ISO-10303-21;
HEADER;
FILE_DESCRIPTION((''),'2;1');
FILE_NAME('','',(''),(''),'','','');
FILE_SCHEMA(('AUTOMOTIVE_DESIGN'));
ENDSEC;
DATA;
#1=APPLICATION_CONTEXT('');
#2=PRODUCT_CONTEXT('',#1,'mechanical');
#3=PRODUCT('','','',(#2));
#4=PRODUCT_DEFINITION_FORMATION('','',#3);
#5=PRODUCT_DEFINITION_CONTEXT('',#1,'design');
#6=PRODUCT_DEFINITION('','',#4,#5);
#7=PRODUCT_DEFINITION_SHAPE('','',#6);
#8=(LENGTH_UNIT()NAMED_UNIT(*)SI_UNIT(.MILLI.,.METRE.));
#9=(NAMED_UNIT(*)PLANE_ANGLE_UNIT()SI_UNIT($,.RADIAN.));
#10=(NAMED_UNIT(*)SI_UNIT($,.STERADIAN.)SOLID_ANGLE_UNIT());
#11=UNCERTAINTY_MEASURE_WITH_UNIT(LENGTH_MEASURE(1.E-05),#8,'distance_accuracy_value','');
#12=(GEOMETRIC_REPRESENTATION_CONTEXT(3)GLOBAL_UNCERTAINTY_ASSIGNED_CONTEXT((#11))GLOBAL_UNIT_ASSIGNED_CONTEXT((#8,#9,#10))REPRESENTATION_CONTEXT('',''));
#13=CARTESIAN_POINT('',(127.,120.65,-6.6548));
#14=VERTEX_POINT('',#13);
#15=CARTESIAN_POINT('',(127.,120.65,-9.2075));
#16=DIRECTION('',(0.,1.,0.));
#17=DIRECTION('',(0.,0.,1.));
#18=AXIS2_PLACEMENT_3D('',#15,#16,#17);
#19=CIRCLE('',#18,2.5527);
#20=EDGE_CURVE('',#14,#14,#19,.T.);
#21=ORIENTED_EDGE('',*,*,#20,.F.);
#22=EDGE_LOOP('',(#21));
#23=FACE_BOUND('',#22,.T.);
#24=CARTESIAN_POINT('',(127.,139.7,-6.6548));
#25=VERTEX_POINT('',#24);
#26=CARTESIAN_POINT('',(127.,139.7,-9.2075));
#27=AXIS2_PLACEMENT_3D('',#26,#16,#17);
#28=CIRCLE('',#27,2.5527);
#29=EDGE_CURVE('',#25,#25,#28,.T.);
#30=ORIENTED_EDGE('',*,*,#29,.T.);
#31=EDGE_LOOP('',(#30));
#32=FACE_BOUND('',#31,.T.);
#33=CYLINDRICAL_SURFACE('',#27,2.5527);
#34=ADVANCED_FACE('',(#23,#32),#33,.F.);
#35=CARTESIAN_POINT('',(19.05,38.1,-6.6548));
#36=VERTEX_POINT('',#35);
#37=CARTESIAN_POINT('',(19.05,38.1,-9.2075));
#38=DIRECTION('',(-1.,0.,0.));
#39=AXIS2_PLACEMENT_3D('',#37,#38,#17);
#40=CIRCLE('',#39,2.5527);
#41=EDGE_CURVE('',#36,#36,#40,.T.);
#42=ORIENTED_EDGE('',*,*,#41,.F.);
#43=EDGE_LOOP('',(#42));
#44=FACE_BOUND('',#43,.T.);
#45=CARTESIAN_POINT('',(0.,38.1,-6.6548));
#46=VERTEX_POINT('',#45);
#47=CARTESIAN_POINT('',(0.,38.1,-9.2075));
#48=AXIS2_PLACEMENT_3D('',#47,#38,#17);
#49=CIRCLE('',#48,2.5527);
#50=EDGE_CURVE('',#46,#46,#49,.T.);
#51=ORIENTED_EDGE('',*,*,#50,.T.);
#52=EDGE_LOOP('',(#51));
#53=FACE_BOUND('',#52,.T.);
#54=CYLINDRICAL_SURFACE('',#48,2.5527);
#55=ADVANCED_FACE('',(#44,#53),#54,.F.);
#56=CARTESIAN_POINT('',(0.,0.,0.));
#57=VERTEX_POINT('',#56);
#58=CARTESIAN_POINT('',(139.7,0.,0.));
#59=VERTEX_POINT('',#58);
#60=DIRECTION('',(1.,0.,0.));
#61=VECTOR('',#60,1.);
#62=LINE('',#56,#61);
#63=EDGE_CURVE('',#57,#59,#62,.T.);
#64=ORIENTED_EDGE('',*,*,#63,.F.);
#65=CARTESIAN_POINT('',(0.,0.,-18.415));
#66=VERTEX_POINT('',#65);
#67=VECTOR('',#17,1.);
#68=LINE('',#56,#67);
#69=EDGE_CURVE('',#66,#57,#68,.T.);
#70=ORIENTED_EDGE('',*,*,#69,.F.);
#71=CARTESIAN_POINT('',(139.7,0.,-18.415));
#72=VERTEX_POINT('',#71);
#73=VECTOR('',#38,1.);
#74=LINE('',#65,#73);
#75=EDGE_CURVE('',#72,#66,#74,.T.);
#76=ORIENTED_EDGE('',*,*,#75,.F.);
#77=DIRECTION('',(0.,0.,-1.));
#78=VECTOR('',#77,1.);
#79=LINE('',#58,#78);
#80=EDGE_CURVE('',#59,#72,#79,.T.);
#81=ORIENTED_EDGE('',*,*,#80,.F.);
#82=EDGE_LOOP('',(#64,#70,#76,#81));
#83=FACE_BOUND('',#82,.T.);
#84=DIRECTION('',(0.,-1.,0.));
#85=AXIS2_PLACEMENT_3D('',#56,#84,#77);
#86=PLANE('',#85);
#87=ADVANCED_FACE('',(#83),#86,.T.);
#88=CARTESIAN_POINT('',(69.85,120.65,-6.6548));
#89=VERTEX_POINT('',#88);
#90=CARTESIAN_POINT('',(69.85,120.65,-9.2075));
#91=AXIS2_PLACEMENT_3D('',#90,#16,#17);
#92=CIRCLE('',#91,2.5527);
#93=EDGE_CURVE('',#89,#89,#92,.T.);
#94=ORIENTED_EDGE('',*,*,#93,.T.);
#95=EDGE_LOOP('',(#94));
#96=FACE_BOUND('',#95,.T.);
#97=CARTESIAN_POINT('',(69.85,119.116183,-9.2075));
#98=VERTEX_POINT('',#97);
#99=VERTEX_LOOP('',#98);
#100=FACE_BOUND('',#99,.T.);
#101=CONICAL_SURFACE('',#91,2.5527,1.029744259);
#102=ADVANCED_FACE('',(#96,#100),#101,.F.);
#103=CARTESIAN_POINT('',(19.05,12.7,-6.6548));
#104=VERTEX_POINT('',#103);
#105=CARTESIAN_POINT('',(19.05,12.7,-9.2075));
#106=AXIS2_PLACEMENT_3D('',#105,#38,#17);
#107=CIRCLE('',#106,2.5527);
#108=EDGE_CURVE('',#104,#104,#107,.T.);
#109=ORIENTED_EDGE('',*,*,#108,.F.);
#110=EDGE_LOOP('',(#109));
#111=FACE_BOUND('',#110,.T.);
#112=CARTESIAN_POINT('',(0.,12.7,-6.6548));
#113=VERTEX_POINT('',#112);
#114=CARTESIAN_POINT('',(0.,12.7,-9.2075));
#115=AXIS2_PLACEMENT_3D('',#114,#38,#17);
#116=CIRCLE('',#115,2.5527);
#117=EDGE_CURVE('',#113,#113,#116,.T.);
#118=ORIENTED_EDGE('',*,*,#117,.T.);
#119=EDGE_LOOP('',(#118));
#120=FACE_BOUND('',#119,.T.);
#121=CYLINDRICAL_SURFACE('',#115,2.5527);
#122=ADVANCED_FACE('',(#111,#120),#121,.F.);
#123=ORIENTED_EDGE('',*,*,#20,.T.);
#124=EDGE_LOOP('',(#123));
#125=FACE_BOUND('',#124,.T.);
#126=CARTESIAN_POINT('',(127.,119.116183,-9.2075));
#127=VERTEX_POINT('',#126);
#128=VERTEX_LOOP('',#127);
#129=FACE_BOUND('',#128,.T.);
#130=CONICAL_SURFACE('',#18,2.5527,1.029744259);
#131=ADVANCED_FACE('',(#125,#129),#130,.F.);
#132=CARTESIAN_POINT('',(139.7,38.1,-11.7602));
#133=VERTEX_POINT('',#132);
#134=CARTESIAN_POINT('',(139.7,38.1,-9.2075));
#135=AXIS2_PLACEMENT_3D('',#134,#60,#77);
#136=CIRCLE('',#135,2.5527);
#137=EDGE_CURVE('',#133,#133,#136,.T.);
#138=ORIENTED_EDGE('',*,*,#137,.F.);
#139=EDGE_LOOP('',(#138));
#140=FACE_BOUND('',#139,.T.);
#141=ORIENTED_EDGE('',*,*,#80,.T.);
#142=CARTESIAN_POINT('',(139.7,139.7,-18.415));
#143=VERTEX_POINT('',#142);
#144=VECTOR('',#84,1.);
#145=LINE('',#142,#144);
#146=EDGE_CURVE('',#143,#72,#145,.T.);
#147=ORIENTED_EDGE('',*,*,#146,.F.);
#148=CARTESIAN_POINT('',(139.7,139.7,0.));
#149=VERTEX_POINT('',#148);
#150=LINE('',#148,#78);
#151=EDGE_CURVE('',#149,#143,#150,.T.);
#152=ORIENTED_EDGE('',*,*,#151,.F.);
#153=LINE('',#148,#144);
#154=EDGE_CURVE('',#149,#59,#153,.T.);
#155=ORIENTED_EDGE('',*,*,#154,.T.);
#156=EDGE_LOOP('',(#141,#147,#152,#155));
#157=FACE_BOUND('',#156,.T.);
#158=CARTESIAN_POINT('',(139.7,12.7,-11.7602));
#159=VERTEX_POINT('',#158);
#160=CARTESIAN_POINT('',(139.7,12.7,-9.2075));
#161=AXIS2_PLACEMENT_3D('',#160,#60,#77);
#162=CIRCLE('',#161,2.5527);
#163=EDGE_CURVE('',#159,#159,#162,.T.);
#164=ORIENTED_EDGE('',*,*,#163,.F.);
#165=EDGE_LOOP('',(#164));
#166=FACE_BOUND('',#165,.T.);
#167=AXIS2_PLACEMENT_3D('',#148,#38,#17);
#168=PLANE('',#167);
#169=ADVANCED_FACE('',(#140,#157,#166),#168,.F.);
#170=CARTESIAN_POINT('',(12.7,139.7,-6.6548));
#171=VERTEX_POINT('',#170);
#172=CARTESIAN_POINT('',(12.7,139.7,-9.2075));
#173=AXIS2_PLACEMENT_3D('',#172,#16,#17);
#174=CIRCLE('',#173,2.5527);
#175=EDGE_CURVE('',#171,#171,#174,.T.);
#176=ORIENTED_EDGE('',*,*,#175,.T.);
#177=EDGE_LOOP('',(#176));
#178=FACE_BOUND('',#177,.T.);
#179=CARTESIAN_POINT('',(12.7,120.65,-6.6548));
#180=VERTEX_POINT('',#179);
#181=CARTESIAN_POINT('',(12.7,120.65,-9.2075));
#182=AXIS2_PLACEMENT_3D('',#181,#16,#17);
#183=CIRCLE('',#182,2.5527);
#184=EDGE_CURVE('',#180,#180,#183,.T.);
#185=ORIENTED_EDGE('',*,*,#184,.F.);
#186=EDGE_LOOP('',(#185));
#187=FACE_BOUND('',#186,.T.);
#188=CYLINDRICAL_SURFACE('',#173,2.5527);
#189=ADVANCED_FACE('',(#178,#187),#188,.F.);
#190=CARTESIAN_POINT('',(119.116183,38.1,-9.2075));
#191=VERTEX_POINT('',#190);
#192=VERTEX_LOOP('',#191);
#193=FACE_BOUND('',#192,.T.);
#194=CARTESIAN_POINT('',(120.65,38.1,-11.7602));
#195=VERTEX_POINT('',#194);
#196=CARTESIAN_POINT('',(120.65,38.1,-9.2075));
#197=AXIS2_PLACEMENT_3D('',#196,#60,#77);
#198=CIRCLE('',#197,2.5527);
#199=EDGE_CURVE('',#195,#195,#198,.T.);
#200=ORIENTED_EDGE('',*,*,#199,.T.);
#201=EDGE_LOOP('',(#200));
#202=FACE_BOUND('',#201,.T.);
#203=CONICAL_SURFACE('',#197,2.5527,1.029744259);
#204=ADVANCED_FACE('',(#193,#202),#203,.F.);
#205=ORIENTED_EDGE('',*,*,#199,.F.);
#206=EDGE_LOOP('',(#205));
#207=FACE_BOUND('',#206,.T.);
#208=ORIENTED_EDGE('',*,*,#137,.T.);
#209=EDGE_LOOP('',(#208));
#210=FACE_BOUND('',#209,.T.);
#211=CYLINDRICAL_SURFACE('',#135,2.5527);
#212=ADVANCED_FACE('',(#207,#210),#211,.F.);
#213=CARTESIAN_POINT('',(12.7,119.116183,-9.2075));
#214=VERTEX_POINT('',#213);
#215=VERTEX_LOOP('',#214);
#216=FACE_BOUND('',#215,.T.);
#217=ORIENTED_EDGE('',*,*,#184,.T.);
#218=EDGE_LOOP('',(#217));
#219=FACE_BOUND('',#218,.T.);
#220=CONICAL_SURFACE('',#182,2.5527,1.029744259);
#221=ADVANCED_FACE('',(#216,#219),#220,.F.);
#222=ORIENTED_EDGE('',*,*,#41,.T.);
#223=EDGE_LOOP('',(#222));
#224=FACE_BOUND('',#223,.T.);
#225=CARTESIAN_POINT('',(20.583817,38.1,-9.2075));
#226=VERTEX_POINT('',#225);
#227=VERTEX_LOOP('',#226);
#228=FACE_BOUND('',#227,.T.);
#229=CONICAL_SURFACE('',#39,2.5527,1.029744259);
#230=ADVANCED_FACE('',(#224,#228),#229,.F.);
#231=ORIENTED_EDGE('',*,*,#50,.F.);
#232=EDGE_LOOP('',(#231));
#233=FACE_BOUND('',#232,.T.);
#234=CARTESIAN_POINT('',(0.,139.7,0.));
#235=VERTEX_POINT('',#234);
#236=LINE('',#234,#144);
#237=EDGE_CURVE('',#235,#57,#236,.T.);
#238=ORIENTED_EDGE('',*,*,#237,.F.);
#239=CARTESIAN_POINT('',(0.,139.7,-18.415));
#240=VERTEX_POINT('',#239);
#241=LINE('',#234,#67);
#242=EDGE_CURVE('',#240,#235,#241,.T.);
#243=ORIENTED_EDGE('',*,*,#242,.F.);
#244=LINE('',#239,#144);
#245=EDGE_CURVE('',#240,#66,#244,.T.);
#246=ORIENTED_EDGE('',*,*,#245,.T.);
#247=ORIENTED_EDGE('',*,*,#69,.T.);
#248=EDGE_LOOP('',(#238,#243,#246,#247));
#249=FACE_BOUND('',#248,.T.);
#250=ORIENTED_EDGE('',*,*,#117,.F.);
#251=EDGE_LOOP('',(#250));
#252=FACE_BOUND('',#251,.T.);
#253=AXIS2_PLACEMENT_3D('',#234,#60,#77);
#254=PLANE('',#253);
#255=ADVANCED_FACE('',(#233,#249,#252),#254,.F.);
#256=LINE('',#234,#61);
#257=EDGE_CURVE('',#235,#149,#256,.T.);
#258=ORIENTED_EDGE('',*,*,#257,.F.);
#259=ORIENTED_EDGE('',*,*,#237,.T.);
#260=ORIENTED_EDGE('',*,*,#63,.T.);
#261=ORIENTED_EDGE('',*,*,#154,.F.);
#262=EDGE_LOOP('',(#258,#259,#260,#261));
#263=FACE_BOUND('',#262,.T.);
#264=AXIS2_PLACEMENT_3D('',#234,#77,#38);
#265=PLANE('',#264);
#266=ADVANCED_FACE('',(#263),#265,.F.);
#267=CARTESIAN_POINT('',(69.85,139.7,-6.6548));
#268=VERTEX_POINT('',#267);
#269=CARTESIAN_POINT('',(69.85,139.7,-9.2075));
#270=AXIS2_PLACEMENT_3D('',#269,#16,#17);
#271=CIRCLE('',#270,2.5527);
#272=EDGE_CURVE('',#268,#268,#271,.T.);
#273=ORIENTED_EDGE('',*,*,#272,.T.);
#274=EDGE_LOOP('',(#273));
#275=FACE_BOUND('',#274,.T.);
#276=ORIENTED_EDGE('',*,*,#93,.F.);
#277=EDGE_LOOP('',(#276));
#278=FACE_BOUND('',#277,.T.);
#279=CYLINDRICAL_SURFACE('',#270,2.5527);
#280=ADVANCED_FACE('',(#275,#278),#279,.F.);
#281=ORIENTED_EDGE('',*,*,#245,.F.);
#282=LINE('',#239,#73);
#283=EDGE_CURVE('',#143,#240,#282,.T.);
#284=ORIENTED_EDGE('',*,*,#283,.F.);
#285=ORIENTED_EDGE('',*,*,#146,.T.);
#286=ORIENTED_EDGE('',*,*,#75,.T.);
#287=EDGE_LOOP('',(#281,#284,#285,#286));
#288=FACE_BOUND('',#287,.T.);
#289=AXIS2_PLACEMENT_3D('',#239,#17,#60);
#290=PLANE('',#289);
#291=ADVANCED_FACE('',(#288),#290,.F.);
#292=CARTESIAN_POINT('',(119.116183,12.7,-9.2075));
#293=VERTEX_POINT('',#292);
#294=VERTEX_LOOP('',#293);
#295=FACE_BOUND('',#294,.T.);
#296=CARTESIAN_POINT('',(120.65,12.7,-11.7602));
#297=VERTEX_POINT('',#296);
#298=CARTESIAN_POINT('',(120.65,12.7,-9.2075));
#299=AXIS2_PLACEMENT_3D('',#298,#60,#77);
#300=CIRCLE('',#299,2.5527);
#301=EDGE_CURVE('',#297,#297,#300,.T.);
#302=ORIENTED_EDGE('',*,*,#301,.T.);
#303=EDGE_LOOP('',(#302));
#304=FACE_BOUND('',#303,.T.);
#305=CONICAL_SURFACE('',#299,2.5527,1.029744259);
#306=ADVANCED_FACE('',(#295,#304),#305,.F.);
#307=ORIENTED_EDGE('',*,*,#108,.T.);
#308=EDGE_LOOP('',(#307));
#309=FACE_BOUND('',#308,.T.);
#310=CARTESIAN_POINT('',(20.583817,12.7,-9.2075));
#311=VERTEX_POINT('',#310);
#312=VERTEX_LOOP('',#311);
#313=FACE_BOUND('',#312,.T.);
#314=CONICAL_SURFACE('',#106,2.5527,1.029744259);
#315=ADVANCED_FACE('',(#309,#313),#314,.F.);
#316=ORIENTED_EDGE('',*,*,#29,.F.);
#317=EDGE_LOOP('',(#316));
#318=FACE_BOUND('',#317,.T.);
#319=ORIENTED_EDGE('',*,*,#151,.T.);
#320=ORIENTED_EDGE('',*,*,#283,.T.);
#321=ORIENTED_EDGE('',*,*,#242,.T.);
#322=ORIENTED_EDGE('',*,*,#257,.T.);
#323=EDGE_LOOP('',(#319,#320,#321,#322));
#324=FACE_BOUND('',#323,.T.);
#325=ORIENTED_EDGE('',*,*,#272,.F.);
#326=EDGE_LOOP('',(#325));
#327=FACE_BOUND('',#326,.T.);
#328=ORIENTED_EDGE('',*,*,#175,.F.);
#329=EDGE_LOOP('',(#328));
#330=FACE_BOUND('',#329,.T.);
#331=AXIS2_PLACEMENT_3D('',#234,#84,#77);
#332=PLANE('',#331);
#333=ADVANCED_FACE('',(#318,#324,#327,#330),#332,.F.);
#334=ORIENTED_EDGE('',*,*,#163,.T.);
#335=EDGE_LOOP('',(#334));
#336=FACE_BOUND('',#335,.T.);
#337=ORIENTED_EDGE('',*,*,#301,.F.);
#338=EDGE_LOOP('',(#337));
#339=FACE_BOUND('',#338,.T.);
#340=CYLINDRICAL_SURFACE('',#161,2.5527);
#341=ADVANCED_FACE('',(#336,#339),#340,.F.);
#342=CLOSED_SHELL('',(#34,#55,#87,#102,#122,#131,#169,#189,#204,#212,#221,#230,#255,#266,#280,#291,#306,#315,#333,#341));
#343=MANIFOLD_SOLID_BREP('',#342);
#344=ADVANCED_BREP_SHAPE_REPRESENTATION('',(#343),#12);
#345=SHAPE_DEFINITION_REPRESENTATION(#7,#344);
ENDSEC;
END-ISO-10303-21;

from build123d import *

# Parameters (mm, degrees)
SKETCH1_W           = 139.7
SKETCH1_H           = 18.415
BOSS_EXTRUDE1_DEPTH = 139.7


# Read off the part's stored shape, not the designer's step: Mirror2
with BuildPart() as part:
    # Sketch1 → Boss-Extrude1 (new body)
    with BuildSketch(Plane(origin=(0, 0, 0), x_dir=(1, 0, 0), z_dir=(0, 1, 0))):
        with Locations((69.85, 9.2075)):
            Rectangle(SKETCH1_W, SKETCH1_H)
    extrude(amount=BOSS_EXTRUDE1_DEPTH)

    # Sketch4 → 1/4-20 Tapped Hole1 (revolve, cut)
    with BuildSketch(Plane(origin=(139.7, 38.1, -9.2075), x_dir=(0, 0, -1), z_dir=(0, 1, 0))):
        Polygon((0, 0), (0, 20.583816902), (2.5527, 19.05), (2.5527, 0), align=None)
    revolve(axis=Axis((146.05, 38.1, -9.2075), (-1, 0, 0)), mode=Mode.SUBTRACT)

    # Sketch4 at point 2 (carried to point 2, square into its face) → 1/4-20 Tapped Hole1 at 2 (revolve, cut)
    with BuildSketch(Plane(origin=(139.7, 12.7, -9.2075), x_dir=(0, 0, -1), z_dir=(0, 1, 0))):
        Polygon((0, 0), (0, 20.583816902), (2.5527, 19.05), (2.5527, 0), align=None)
    revolve(axis=Axis((146.05, 12.7, -9.2075), (-1, 0, 0)), mode=Mode.SUBTRACT)

    # Sketch4 at point 3 (carried to point 3, square into its face) → 1/4-20 Tapped Hole1 at 3 (revolve, cut)
    with BuildSketch(Plane(origin=(69.85, 139.7, -9.2075), x_dir=(0, 0, -1), z_dir=(-1, 0, 0))):
        Polygon((0, 0), (0, 20.583816902), (2.5527, 19.05), (2.5527, 0), align=None)
    revolve(axis=Axis((69.85, 146.05, -9.2075), (0, -1, 0)), mode=Mode.SUBTRACT)

    # Sketch4 at point 4 (carried to point 4, square into its face) → 1/4-20 Tapped Hole1 at 4 (revolve, cut)
    with BuildSketch(Plane(origin=(12.7, 139.7, -9.2075), x_dir=(0, 0, -1), z_dir=(-1, 0, 0))):
        Polygon((0, 0), (0, 20.583816902), (2.5527, 19.05), (2.5527, 0), align=None)
    revolve(axis=Axis((12.7, 146.05, -9.2075), (0, -1, 0)), mode=Mode.SUBTRACT)

    # Mirror2 outline → Mirror2 (revolve, cut)
    with BuildSketch(Plane(origin=(0, 12.7, -9.2075), x_dir=(0, 1, 0), z_dir=(0, 0, -1))):
        Polygon((2.5527, 0), (2.5527, 19.05), (0, 20.583816902), (0, 0), align=None)
    revolve(axis=Axis((0, 12.7, -9.2075), (1, 0, 0)), mode=Mode.SUBTRACT)

    # Mirror2 2 outline → Mirror2 2 (revolve, cut)
    with BuildSketch(Plane(origin=(0, 38.1, -9.2075), x_dir=(0, 1, 0), z_dir=(0, 0, -1))):
        Polygon((2.5527, 0), (2.5527, 19.05), (0, 20.583816902), (0, 0), align=None)
    revolve(axis=Axis((0, 38.1, -9.2075), (1, 0, 0)), mode=Mode.SUBTRACT)

    # Mirror2 3 outline → Mirror2 3 (revolve, cut)
    with BuildSketch(Plane(origin=(127, 0, -9.2075), x_dir=(1, 0, 0), z_dir=(0, 0, 1))):
        Polygon((0, 139.7), (0, 119.116183098), (2.5527, 120.65), (2.5527, 139.7), align=None)
    revolve(axis=Axis((127, 0, -9.2075), (0, 1, 0)), mode=Mode.SUBTRACT)


solid = part.part
